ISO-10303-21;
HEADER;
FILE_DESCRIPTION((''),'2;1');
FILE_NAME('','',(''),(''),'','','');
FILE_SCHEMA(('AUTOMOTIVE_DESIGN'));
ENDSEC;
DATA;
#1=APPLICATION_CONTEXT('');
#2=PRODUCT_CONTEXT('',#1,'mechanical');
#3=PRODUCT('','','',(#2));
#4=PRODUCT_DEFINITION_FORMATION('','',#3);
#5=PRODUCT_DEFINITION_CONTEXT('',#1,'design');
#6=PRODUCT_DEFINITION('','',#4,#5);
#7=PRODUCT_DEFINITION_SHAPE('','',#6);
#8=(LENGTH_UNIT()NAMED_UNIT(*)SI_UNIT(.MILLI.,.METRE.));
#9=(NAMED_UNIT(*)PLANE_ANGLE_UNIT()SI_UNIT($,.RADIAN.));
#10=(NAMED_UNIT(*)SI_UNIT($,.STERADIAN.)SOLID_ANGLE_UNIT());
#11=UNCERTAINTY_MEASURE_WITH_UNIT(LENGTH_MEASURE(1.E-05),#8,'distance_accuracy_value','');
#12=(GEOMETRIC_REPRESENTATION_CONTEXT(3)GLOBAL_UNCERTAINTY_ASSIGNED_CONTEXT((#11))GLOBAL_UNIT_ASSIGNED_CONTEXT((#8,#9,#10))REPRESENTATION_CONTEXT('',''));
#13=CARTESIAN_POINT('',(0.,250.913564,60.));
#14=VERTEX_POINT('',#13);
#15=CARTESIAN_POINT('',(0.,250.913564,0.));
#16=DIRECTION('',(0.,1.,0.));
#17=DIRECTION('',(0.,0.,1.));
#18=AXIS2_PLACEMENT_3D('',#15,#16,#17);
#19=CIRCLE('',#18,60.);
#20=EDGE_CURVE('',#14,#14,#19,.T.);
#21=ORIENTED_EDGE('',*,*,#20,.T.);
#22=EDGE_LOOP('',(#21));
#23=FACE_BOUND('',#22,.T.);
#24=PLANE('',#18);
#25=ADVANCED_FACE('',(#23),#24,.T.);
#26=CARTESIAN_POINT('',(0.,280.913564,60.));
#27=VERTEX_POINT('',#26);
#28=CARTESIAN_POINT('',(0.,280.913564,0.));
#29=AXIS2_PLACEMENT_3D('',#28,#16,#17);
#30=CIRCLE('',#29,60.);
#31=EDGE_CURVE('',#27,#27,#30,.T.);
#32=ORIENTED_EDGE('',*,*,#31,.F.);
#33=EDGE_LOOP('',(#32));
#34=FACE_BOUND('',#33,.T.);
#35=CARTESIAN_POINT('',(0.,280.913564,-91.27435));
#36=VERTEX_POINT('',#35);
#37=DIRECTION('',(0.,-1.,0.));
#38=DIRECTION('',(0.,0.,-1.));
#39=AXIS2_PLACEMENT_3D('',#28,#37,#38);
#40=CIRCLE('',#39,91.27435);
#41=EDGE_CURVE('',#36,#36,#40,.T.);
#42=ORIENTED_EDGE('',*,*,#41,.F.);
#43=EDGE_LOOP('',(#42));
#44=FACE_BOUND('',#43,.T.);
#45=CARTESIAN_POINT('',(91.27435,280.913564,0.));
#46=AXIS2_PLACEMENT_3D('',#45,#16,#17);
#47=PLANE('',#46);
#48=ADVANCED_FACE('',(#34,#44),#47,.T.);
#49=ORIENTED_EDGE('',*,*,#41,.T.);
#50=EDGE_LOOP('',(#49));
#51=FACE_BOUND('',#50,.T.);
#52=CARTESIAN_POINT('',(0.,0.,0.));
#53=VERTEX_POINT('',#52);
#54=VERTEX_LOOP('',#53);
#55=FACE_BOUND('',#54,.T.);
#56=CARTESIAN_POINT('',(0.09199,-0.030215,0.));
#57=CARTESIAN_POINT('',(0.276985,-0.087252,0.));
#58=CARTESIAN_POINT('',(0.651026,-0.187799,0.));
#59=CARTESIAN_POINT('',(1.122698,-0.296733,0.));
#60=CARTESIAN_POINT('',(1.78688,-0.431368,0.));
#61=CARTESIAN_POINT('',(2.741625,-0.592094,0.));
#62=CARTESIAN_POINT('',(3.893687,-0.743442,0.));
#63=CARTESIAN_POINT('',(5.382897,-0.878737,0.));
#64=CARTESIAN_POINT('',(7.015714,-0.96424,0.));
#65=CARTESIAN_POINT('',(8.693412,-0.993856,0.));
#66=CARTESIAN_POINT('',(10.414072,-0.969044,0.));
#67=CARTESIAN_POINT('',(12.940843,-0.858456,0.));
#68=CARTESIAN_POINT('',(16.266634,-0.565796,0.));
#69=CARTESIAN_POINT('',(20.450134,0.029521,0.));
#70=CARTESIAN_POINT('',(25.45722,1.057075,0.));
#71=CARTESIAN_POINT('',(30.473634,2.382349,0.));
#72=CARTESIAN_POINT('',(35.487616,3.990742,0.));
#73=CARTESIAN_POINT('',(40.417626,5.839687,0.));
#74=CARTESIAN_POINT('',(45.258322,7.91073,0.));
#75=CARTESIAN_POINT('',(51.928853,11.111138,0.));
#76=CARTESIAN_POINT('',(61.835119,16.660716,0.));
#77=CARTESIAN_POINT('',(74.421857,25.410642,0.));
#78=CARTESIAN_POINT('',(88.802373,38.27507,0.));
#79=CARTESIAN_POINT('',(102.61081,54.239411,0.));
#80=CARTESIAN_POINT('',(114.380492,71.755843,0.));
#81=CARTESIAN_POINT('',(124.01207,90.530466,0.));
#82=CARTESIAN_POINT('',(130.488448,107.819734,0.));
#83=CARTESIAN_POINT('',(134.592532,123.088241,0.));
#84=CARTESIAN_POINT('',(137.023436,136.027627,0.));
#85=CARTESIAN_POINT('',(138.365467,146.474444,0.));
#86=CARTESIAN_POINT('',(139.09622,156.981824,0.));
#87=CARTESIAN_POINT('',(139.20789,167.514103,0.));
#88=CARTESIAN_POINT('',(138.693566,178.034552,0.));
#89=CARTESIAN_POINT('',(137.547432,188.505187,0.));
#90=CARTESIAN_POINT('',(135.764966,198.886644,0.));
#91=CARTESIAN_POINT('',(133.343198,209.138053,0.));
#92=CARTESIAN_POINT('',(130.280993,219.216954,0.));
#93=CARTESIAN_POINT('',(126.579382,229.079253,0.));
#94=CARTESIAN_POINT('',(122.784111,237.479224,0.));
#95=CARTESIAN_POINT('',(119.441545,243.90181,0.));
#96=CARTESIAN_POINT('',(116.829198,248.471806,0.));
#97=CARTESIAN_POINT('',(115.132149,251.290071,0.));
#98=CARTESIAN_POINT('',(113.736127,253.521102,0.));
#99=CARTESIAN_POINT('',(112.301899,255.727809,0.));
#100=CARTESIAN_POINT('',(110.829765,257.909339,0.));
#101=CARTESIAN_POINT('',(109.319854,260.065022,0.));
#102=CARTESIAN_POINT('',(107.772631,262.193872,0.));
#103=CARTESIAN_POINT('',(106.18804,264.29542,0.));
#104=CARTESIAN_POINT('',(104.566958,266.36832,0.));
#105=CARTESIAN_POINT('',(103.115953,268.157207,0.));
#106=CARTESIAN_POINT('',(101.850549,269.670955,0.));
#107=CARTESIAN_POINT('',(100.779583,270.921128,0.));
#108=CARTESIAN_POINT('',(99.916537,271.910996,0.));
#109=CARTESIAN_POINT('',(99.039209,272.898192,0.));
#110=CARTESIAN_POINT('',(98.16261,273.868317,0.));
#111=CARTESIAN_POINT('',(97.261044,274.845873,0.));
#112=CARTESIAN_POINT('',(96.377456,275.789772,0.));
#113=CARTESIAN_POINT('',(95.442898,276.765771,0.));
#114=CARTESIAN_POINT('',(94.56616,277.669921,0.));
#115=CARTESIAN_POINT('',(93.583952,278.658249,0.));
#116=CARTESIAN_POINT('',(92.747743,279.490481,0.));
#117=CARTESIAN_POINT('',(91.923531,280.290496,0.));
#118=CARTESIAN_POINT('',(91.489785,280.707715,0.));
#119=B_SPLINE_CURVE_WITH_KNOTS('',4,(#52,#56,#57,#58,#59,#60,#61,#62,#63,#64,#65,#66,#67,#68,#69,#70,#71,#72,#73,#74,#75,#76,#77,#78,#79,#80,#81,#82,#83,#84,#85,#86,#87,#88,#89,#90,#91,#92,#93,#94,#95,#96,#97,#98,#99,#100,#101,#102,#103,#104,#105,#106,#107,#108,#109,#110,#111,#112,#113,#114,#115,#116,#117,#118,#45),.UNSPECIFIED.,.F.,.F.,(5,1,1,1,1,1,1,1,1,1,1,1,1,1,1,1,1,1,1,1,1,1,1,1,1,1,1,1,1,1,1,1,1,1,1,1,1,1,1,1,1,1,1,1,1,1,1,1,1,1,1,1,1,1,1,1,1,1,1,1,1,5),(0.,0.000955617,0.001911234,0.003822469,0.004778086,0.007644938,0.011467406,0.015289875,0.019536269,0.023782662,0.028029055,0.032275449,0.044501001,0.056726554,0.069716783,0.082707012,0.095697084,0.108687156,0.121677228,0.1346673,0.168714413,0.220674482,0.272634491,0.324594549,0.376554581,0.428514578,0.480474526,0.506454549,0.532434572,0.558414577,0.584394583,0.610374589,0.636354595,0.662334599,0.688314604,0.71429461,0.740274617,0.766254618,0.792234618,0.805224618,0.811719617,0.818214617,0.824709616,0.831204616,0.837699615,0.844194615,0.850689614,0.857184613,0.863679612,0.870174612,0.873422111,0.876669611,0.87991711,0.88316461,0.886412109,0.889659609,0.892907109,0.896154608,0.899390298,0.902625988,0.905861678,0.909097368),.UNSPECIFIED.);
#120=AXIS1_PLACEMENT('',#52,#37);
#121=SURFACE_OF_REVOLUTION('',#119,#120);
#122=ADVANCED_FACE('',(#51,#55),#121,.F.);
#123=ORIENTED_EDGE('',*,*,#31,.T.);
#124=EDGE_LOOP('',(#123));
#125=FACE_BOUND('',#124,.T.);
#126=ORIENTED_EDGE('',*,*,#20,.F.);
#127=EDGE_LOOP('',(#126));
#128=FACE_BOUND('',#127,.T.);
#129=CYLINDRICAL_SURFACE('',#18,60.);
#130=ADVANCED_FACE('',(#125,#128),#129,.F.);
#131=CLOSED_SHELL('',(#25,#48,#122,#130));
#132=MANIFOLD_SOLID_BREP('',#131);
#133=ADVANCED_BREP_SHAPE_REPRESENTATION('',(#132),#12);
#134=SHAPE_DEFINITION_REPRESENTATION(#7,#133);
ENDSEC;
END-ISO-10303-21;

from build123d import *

# Parameters (mm, degrees)
HOLE1_START     = 250.913563574
HOLE1_OUTLINE_R = 60
HOLE1_DEPTH     = 30


# Read off the part's stored shape, not the designer's step: Hole1
with BuildPart() as part:
    # Sketch1 → Revolve6 (revolve)
    with BuildSketch(Plane.XY):
        with BuildLine():
            Line((91.274349755, 280.913563574), (-9e-09, 280.913563574))
            Line((-9e-09, 280.913563574), (-9e-09, 3e-09))
            add(Edge.make_bspline(
                [(-9e-09, 3e-09), (0.091989573, -0.030214934), (0.27698516, -0.087252105), (0.651025601, -0.187798967), (1.122698198, -0.296732641), (1.786879755, -0.431368155), (2.74162502, -0.592094226), (3.89368651, -0.743441748), (5.38289706, -0.878736697), (7.015713919, -0.964240306), (8.693411621, -0.993855838), (10.414072424, -0.969044452), (12.940843472, -0.858456297), (16.266634453, -0.565795726), (20.450134204, 0.029521011), (25.457220295, 1.057074726), (30.473634045, 2.382349251), (35.48761579, 3.99074212), (40.417625987, 5.839687063), (45.258322203, 7.910730255), (51.92885298, 11.111137534), (61.835118969, 16.660715938), (74.42185706, 25.41064177), (88.802372855, 38.275070049), (102.610809616, 54.239411195), (114.380492331, 71.755843119), (124.012069939, 90.530465597), (130.488447554, 107.819733576), (134.592531576, 123.088241118), (137.023436311, 136.027627029), (138.365467236, 146.474444179), (139.096219756, 156.981823991), (139.207889835, 167.514102999), (138.693565855, 178.03455236), (137.547432357, 188.505187398), (135.764966432, 198.886644329), (133.343198251, 209.138052599), (130.280993263, 219.216953733), (126.579382252, 229.079252777), (122.784110511, 237.479223572), (119.441545144, 243.901810038), (116.829197832, 248.471805701), (115.132149087, 251.290070823), (113.736126906, 253.521102102), (112.301898629, 255.727808503), (110.829765163, 257.909339257), (109.319853588, 260.06502184), (107.772630663, 262.193872297), (106.188040412, 264.295420016), (104.566957609, 266.368319849), (103.115952966, 268.1572067), (101.850548572, 269.67095486), (100.779582665, 270.921128036), (99.916536979, 271.910996123), (99.039208527, 272.898191984), (98.162610179, 273.868316914), (97.261043818, 274.84587273), (96.377456465, 275.789772177), (95.442898163, 276.765771152), (94.566159997, 277.669921291), (93.583951565, 278.658249353), (92.747743102, 279.490480582), (91.92353091, 280.290495929), (91.489785056, 280.707715472), (91.274349755, 280.913563574)],
                knots=[0, 0, 0, 0, 0, 0.000955617, 0.001911234, 0.003822469, 0.004778086, 0.007644938, 0.011467406, 0.015289875, 0.019536269, 0.023782662, 0.028029055, 0.032275449, 0.044501001, 0.056726554, 0.069716783, 0.082707012, 0.095697084, 0.108687156, 0.121677228, 0.1346673, 0.168714413, 0.220674482, 0.272634491, 0.324594549, 0.376554581, 0.428514578, 0.480474526, 0.506454549, 0.532434572, 0.558414577, 0.584394583, 0.610374589, 0.636354595, 0.662334599, 0.688314604, 0.71429461, 0.740274617, 0.766254618, 0.792234618, 0.805224618, 0.811719617, 0.818214617, 0.824709616, 0.831204616, 0.837699615, 0.844194615, 0.850689614, 0.857184613, 0.863679612, 0.870174612, 0.873422111, 0.876669611, 0.87991711, 0.88316461, 0.886412109, 0.889659609, 0.892907109, 0.896154608, 0.899390298, 0.902625988, 0.905861678, 0.909097368, 0.909097368, 0.909097368, 0.909097368, 0.909097368], degree=4))
        make_face()
    revolve(axis=Axis((-9e-09, 3e-09, 0), (0, 1, 0)))

    # Hole1 outline → Hole1 (cut)
    with BuildSketch(Plane(origin=(0, 0, 0), x_dir=(1, 0, 0), z_dir=(0, 1, 0)).offset(HOLE1_START)):
        Circle(HOLE1_OUTLINE_R)
    extrude(amount=HOLE1_DEPTH, mode=Mode.SUBTRACT)


solid = part.part
